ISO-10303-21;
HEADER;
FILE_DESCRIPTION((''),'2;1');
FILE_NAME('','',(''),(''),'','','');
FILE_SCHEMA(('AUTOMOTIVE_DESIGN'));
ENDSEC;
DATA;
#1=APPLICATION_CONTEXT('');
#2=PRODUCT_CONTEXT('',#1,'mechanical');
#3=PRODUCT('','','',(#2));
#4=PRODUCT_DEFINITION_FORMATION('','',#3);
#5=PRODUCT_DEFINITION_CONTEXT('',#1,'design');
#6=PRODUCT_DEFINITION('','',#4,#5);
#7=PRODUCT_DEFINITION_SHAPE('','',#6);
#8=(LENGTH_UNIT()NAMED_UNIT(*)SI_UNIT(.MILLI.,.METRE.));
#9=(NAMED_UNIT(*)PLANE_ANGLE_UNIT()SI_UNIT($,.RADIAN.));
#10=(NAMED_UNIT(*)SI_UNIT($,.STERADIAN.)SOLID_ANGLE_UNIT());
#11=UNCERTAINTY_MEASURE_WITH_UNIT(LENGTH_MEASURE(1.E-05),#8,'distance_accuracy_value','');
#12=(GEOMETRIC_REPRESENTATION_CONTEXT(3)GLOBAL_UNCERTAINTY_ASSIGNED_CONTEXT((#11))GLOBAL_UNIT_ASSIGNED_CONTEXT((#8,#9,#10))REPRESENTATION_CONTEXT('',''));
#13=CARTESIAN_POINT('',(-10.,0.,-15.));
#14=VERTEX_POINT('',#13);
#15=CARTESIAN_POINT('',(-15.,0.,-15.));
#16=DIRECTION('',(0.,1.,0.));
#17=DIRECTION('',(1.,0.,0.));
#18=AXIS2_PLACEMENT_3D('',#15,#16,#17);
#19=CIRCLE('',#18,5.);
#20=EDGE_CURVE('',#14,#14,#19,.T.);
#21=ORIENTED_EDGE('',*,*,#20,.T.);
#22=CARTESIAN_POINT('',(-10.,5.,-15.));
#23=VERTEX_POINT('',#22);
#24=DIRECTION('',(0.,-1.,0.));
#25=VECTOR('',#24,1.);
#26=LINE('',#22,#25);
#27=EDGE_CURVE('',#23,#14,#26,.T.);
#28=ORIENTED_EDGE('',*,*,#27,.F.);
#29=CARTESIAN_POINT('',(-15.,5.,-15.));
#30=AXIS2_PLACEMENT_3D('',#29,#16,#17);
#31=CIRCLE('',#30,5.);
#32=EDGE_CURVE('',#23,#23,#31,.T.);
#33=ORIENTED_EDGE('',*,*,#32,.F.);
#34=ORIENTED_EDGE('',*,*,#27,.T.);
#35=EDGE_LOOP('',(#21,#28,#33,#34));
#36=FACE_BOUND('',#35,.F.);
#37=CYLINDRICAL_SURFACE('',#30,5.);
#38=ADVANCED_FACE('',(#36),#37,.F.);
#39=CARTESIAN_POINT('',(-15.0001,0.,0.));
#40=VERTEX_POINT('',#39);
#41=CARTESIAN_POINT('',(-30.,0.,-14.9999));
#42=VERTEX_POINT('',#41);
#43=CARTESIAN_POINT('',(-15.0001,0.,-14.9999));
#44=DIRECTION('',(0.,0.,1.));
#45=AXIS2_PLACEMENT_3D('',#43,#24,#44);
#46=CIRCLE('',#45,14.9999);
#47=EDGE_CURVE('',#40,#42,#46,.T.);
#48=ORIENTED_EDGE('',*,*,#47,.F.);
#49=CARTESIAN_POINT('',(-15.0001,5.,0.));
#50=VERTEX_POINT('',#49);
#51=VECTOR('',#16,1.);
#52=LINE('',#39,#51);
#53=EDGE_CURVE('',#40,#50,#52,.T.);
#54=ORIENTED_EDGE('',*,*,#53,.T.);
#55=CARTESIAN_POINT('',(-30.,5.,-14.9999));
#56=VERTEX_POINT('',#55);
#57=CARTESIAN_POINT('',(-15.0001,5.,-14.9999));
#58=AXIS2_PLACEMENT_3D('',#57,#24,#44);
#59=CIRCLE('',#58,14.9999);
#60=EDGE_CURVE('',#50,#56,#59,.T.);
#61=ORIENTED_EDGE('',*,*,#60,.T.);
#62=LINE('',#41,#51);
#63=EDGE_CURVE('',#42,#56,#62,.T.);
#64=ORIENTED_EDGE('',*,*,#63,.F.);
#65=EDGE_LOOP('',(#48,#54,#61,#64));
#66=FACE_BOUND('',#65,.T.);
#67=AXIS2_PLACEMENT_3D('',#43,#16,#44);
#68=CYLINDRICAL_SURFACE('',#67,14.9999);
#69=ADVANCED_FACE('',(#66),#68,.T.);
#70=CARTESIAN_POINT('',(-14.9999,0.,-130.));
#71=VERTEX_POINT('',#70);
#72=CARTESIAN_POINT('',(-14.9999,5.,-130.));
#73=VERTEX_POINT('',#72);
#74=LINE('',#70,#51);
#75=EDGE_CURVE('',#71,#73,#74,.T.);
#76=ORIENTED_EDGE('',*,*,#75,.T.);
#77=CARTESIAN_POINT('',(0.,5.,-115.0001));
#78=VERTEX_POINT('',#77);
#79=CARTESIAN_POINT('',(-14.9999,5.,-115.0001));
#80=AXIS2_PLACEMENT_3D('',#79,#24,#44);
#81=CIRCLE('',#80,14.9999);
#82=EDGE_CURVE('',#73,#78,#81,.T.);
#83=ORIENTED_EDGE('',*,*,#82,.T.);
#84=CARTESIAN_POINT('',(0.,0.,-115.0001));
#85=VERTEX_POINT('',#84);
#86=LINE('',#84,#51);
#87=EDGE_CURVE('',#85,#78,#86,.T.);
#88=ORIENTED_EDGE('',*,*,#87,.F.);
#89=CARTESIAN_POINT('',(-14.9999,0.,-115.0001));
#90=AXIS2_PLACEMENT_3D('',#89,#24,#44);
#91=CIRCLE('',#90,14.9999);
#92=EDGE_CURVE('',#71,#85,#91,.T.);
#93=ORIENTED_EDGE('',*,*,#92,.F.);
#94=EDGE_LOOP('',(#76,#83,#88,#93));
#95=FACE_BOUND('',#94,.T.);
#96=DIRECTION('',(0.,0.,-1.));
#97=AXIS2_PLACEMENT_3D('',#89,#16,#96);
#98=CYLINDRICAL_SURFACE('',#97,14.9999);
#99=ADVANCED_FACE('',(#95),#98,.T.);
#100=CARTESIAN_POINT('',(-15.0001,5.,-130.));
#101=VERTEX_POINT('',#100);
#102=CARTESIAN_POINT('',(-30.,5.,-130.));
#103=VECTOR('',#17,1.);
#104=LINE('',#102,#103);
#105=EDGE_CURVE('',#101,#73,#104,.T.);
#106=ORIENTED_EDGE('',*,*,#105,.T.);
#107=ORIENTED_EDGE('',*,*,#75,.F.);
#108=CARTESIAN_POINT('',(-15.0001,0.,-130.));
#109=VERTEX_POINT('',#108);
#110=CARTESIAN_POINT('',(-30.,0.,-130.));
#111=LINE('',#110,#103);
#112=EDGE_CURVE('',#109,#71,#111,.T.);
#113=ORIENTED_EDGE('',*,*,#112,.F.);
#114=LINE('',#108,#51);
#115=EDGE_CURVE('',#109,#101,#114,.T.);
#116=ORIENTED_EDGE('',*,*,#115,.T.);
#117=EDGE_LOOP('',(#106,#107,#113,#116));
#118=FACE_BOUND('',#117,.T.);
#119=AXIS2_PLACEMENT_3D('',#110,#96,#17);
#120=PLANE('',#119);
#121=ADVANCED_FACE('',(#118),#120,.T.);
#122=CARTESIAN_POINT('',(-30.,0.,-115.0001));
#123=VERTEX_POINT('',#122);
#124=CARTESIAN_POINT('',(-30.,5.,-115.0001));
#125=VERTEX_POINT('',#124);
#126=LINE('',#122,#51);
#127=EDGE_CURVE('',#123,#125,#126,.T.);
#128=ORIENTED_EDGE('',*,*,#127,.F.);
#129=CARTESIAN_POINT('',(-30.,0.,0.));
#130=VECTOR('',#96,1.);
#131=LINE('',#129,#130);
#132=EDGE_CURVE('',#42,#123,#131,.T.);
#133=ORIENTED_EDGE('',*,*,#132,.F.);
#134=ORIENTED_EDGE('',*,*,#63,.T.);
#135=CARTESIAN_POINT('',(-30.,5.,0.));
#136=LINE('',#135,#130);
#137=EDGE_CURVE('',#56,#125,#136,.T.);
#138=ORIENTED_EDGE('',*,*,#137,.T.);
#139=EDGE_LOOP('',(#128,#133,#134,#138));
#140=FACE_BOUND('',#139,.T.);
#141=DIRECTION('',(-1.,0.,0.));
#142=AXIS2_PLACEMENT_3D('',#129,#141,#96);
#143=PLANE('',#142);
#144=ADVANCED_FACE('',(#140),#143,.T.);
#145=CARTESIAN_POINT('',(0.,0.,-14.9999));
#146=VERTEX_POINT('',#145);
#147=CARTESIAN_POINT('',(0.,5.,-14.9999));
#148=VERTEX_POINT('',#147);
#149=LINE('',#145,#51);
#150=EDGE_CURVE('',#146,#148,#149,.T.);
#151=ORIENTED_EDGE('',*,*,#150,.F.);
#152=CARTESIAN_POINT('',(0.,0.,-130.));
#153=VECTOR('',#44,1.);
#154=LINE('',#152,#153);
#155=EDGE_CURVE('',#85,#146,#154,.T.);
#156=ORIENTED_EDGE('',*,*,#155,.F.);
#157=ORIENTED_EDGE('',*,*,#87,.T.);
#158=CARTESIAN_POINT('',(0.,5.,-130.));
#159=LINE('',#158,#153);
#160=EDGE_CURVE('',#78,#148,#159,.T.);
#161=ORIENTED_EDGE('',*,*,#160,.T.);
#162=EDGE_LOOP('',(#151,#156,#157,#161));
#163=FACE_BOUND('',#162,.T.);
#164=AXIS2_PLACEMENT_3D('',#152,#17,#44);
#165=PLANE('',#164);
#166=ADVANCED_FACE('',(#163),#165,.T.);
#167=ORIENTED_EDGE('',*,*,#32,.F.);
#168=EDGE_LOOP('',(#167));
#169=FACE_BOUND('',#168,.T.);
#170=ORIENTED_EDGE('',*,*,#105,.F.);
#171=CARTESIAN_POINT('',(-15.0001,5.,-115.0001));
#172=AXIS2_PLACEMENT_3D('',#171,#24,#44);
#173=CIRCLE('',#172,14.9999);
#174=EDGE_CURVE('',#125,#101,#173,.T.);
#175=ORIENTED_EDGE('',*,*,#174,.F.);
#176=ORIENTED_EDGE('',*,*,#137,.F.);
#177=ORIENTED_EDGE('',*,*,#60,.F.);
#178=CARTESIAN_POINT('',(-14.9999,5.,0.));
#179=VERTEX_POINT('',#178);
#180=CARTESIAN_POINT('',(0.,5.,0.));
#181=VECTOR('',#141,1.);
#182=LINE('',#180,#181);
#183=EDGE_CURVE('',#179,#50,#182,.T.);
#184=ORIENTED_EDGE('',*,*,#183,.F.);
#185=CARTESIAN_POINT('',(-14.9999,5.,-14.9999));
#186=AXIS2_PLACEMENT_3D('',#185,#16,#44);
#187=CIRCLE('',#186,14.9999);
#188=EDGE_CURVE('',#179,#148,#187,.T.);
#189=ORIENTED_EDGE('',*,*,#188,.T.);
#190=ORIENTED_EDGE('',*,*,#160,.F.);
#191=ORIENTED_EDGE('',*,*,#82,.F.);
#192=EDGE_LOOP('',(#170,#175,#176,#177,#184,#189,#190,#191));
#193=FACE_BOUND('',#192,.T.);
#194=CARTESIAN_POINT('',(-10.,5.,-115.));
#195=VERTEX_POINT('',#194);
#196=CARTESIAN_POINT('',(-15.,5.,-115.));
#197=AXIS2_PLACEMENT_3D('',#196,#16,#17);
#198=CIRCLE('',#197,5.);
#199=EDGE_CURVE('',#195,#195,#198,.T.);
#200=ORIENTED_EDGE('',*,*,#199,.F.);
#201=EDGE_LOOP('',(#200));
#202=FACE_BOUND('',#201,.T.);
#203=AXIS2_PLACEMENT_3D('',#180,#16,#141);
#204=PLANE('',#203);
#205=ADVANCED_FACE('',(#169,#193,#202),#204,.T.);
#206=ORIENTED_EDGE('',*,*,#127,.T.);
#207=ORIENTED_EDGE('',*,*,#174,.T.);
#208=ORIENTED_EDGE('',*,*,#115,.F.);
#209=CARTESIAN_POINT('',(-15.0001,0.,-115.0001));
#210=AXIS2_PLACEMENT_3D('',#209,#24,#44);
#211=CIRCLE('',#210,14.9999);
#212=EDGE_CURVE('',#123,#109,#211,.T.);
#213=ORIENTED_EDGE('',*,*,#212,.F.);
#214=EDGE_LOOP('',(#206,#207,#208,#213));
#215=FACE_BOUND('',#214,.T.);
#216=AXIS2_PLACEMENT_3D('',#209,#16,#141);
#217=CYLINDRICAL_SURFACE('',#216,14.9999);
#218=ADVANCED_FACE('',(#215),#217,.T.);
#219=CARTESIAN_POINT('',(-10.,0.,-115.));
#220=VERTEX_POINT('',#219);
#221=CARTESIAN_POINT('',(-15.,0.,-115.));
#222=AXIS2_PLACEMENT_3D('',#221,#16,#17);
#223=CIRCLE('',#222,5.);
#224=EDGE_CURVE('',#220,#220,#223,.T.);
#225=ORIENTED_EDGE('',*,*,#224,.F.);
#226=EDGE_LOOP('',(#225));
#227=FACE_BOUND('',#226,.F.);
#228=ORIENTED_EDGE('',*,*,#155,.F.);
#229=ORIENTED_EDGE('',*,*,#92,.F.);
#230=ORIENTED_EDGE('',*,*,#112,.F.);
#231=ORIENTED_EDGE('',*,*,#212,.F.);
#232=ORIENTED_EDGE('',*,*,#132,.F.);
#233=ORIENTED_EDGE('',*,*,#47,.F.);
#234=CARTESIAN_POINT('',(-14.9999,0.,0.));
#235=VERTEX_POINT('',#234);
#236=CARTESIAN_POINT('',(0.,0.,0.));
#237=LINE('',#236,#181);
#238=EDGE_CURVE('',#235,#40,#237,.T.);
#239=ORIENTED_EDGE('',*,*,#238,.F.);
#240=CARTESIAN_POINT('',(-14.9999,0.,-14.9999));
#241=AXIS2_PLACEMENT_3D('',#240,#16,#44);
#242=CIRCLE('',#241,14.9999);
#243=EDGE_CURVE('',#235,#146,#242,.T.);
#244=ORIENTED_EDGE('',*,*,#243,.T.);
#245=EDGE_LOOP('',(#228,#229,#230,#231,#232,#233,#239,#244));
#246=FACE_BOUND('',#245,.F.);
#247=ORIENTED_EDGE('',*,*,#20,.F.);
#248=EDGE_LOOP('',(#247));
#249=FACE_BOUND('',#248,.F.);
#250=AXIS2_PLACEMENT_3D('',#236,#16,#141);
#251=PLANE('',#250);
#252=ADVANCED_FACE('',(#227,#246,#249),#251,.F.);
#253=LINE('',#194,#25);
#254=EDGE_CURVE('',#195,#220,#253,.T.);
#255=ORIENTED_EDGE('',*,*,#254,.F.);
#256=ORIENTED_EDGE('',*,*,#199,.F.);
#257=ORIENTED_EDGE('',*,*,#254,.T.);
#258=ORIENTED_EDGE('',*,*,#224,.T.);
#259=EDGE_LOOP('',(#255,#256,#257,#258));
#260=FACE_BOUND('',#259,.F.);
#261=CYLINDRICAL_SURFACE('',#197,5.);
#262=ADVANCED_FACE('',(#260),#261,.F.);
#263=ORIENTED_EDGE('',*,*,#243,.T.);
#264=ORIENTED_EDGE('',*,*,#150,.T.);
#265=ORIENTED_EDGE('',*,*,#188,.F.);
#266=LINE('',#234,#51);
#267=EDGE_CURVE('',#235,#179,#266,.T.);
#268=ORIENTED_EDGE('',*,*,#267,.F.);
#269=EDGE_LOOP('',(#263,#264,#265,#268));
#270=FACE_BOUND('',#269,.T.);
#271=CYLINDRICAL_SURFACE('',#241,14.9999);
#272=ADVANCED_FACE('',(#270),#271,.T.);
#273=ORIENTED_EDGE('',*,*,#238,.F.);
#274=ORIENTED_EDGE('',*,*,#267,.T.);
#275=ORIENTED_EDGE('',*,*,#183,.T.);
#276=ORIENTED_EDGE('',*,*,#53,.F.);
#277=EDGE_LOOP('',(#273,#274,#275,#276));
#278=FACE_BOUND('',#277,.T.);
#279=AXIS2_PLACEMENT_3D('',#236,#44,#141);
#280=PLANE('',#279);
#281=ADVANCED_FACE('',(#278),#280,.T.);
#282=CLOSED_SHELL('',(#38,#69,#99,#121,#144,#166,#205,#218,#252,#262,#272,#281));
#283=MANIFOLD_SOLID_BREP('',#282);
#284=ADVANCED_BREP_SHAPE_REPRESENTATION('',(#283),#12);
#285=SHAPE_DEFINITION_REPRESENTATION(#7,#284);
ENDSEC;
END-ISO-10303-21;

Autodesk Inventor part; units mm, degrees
ref_plane "YZ Plane" through (0, 0, 0) normal (1, 0, 0) x (0, 1, 0)
ref_plane "XZ Plane" through (0, 0, 0) normal (0, 1, 0) x (-1, 0, 0)
ref_plane "XY Plane" through (0, 0, 0) normal (0, 0, 1) x (1, 0, 0)
sketch "Sketch1" plane through (0, 0, 0) normal (0, 1, 0) x (-1, 0, 0)
  line L0 (0, 0) -> (30, 0)
  line L1 (30, 0) -> (30, -130)
  line L2 (30, -130) -> (0, -130)
  line L3 (0, -130) -> (0, 0)
  dimension "d0" = 30
  dimension "d1" = 130
extrude "Extrusion1" add sketch "Sketch1" along normal blind 5
fillet "Fillet1" radius 15 4 edges at (0, 2.5, 0) (-30, 2.5, 0) (0, 2.5, -130) (-30, 2.5, -130)
sketch "Sketch2" plane through (0, 5, 0) normal (0, 1, 0) x (1, 0, 0)
  arc A0 (-30, 15) -> (0, 15) centre (-15, 15) ccw projected
  circle A1 centre (-15, 15) radius 5
  arc A2 (0, 115) -> (-30, 115) centre (-15, 115) ccw projected
  circle A3 centre (-15, 115) radius 5
  point P0 (0, 0)
  dimension "d5" = 10
  dimension "d6" = 10
extrude "Extrusion2" cut sketch "Sketch2" against normal blind 10
equation "\"d7\" = d6"
properties part number "Rocker"
